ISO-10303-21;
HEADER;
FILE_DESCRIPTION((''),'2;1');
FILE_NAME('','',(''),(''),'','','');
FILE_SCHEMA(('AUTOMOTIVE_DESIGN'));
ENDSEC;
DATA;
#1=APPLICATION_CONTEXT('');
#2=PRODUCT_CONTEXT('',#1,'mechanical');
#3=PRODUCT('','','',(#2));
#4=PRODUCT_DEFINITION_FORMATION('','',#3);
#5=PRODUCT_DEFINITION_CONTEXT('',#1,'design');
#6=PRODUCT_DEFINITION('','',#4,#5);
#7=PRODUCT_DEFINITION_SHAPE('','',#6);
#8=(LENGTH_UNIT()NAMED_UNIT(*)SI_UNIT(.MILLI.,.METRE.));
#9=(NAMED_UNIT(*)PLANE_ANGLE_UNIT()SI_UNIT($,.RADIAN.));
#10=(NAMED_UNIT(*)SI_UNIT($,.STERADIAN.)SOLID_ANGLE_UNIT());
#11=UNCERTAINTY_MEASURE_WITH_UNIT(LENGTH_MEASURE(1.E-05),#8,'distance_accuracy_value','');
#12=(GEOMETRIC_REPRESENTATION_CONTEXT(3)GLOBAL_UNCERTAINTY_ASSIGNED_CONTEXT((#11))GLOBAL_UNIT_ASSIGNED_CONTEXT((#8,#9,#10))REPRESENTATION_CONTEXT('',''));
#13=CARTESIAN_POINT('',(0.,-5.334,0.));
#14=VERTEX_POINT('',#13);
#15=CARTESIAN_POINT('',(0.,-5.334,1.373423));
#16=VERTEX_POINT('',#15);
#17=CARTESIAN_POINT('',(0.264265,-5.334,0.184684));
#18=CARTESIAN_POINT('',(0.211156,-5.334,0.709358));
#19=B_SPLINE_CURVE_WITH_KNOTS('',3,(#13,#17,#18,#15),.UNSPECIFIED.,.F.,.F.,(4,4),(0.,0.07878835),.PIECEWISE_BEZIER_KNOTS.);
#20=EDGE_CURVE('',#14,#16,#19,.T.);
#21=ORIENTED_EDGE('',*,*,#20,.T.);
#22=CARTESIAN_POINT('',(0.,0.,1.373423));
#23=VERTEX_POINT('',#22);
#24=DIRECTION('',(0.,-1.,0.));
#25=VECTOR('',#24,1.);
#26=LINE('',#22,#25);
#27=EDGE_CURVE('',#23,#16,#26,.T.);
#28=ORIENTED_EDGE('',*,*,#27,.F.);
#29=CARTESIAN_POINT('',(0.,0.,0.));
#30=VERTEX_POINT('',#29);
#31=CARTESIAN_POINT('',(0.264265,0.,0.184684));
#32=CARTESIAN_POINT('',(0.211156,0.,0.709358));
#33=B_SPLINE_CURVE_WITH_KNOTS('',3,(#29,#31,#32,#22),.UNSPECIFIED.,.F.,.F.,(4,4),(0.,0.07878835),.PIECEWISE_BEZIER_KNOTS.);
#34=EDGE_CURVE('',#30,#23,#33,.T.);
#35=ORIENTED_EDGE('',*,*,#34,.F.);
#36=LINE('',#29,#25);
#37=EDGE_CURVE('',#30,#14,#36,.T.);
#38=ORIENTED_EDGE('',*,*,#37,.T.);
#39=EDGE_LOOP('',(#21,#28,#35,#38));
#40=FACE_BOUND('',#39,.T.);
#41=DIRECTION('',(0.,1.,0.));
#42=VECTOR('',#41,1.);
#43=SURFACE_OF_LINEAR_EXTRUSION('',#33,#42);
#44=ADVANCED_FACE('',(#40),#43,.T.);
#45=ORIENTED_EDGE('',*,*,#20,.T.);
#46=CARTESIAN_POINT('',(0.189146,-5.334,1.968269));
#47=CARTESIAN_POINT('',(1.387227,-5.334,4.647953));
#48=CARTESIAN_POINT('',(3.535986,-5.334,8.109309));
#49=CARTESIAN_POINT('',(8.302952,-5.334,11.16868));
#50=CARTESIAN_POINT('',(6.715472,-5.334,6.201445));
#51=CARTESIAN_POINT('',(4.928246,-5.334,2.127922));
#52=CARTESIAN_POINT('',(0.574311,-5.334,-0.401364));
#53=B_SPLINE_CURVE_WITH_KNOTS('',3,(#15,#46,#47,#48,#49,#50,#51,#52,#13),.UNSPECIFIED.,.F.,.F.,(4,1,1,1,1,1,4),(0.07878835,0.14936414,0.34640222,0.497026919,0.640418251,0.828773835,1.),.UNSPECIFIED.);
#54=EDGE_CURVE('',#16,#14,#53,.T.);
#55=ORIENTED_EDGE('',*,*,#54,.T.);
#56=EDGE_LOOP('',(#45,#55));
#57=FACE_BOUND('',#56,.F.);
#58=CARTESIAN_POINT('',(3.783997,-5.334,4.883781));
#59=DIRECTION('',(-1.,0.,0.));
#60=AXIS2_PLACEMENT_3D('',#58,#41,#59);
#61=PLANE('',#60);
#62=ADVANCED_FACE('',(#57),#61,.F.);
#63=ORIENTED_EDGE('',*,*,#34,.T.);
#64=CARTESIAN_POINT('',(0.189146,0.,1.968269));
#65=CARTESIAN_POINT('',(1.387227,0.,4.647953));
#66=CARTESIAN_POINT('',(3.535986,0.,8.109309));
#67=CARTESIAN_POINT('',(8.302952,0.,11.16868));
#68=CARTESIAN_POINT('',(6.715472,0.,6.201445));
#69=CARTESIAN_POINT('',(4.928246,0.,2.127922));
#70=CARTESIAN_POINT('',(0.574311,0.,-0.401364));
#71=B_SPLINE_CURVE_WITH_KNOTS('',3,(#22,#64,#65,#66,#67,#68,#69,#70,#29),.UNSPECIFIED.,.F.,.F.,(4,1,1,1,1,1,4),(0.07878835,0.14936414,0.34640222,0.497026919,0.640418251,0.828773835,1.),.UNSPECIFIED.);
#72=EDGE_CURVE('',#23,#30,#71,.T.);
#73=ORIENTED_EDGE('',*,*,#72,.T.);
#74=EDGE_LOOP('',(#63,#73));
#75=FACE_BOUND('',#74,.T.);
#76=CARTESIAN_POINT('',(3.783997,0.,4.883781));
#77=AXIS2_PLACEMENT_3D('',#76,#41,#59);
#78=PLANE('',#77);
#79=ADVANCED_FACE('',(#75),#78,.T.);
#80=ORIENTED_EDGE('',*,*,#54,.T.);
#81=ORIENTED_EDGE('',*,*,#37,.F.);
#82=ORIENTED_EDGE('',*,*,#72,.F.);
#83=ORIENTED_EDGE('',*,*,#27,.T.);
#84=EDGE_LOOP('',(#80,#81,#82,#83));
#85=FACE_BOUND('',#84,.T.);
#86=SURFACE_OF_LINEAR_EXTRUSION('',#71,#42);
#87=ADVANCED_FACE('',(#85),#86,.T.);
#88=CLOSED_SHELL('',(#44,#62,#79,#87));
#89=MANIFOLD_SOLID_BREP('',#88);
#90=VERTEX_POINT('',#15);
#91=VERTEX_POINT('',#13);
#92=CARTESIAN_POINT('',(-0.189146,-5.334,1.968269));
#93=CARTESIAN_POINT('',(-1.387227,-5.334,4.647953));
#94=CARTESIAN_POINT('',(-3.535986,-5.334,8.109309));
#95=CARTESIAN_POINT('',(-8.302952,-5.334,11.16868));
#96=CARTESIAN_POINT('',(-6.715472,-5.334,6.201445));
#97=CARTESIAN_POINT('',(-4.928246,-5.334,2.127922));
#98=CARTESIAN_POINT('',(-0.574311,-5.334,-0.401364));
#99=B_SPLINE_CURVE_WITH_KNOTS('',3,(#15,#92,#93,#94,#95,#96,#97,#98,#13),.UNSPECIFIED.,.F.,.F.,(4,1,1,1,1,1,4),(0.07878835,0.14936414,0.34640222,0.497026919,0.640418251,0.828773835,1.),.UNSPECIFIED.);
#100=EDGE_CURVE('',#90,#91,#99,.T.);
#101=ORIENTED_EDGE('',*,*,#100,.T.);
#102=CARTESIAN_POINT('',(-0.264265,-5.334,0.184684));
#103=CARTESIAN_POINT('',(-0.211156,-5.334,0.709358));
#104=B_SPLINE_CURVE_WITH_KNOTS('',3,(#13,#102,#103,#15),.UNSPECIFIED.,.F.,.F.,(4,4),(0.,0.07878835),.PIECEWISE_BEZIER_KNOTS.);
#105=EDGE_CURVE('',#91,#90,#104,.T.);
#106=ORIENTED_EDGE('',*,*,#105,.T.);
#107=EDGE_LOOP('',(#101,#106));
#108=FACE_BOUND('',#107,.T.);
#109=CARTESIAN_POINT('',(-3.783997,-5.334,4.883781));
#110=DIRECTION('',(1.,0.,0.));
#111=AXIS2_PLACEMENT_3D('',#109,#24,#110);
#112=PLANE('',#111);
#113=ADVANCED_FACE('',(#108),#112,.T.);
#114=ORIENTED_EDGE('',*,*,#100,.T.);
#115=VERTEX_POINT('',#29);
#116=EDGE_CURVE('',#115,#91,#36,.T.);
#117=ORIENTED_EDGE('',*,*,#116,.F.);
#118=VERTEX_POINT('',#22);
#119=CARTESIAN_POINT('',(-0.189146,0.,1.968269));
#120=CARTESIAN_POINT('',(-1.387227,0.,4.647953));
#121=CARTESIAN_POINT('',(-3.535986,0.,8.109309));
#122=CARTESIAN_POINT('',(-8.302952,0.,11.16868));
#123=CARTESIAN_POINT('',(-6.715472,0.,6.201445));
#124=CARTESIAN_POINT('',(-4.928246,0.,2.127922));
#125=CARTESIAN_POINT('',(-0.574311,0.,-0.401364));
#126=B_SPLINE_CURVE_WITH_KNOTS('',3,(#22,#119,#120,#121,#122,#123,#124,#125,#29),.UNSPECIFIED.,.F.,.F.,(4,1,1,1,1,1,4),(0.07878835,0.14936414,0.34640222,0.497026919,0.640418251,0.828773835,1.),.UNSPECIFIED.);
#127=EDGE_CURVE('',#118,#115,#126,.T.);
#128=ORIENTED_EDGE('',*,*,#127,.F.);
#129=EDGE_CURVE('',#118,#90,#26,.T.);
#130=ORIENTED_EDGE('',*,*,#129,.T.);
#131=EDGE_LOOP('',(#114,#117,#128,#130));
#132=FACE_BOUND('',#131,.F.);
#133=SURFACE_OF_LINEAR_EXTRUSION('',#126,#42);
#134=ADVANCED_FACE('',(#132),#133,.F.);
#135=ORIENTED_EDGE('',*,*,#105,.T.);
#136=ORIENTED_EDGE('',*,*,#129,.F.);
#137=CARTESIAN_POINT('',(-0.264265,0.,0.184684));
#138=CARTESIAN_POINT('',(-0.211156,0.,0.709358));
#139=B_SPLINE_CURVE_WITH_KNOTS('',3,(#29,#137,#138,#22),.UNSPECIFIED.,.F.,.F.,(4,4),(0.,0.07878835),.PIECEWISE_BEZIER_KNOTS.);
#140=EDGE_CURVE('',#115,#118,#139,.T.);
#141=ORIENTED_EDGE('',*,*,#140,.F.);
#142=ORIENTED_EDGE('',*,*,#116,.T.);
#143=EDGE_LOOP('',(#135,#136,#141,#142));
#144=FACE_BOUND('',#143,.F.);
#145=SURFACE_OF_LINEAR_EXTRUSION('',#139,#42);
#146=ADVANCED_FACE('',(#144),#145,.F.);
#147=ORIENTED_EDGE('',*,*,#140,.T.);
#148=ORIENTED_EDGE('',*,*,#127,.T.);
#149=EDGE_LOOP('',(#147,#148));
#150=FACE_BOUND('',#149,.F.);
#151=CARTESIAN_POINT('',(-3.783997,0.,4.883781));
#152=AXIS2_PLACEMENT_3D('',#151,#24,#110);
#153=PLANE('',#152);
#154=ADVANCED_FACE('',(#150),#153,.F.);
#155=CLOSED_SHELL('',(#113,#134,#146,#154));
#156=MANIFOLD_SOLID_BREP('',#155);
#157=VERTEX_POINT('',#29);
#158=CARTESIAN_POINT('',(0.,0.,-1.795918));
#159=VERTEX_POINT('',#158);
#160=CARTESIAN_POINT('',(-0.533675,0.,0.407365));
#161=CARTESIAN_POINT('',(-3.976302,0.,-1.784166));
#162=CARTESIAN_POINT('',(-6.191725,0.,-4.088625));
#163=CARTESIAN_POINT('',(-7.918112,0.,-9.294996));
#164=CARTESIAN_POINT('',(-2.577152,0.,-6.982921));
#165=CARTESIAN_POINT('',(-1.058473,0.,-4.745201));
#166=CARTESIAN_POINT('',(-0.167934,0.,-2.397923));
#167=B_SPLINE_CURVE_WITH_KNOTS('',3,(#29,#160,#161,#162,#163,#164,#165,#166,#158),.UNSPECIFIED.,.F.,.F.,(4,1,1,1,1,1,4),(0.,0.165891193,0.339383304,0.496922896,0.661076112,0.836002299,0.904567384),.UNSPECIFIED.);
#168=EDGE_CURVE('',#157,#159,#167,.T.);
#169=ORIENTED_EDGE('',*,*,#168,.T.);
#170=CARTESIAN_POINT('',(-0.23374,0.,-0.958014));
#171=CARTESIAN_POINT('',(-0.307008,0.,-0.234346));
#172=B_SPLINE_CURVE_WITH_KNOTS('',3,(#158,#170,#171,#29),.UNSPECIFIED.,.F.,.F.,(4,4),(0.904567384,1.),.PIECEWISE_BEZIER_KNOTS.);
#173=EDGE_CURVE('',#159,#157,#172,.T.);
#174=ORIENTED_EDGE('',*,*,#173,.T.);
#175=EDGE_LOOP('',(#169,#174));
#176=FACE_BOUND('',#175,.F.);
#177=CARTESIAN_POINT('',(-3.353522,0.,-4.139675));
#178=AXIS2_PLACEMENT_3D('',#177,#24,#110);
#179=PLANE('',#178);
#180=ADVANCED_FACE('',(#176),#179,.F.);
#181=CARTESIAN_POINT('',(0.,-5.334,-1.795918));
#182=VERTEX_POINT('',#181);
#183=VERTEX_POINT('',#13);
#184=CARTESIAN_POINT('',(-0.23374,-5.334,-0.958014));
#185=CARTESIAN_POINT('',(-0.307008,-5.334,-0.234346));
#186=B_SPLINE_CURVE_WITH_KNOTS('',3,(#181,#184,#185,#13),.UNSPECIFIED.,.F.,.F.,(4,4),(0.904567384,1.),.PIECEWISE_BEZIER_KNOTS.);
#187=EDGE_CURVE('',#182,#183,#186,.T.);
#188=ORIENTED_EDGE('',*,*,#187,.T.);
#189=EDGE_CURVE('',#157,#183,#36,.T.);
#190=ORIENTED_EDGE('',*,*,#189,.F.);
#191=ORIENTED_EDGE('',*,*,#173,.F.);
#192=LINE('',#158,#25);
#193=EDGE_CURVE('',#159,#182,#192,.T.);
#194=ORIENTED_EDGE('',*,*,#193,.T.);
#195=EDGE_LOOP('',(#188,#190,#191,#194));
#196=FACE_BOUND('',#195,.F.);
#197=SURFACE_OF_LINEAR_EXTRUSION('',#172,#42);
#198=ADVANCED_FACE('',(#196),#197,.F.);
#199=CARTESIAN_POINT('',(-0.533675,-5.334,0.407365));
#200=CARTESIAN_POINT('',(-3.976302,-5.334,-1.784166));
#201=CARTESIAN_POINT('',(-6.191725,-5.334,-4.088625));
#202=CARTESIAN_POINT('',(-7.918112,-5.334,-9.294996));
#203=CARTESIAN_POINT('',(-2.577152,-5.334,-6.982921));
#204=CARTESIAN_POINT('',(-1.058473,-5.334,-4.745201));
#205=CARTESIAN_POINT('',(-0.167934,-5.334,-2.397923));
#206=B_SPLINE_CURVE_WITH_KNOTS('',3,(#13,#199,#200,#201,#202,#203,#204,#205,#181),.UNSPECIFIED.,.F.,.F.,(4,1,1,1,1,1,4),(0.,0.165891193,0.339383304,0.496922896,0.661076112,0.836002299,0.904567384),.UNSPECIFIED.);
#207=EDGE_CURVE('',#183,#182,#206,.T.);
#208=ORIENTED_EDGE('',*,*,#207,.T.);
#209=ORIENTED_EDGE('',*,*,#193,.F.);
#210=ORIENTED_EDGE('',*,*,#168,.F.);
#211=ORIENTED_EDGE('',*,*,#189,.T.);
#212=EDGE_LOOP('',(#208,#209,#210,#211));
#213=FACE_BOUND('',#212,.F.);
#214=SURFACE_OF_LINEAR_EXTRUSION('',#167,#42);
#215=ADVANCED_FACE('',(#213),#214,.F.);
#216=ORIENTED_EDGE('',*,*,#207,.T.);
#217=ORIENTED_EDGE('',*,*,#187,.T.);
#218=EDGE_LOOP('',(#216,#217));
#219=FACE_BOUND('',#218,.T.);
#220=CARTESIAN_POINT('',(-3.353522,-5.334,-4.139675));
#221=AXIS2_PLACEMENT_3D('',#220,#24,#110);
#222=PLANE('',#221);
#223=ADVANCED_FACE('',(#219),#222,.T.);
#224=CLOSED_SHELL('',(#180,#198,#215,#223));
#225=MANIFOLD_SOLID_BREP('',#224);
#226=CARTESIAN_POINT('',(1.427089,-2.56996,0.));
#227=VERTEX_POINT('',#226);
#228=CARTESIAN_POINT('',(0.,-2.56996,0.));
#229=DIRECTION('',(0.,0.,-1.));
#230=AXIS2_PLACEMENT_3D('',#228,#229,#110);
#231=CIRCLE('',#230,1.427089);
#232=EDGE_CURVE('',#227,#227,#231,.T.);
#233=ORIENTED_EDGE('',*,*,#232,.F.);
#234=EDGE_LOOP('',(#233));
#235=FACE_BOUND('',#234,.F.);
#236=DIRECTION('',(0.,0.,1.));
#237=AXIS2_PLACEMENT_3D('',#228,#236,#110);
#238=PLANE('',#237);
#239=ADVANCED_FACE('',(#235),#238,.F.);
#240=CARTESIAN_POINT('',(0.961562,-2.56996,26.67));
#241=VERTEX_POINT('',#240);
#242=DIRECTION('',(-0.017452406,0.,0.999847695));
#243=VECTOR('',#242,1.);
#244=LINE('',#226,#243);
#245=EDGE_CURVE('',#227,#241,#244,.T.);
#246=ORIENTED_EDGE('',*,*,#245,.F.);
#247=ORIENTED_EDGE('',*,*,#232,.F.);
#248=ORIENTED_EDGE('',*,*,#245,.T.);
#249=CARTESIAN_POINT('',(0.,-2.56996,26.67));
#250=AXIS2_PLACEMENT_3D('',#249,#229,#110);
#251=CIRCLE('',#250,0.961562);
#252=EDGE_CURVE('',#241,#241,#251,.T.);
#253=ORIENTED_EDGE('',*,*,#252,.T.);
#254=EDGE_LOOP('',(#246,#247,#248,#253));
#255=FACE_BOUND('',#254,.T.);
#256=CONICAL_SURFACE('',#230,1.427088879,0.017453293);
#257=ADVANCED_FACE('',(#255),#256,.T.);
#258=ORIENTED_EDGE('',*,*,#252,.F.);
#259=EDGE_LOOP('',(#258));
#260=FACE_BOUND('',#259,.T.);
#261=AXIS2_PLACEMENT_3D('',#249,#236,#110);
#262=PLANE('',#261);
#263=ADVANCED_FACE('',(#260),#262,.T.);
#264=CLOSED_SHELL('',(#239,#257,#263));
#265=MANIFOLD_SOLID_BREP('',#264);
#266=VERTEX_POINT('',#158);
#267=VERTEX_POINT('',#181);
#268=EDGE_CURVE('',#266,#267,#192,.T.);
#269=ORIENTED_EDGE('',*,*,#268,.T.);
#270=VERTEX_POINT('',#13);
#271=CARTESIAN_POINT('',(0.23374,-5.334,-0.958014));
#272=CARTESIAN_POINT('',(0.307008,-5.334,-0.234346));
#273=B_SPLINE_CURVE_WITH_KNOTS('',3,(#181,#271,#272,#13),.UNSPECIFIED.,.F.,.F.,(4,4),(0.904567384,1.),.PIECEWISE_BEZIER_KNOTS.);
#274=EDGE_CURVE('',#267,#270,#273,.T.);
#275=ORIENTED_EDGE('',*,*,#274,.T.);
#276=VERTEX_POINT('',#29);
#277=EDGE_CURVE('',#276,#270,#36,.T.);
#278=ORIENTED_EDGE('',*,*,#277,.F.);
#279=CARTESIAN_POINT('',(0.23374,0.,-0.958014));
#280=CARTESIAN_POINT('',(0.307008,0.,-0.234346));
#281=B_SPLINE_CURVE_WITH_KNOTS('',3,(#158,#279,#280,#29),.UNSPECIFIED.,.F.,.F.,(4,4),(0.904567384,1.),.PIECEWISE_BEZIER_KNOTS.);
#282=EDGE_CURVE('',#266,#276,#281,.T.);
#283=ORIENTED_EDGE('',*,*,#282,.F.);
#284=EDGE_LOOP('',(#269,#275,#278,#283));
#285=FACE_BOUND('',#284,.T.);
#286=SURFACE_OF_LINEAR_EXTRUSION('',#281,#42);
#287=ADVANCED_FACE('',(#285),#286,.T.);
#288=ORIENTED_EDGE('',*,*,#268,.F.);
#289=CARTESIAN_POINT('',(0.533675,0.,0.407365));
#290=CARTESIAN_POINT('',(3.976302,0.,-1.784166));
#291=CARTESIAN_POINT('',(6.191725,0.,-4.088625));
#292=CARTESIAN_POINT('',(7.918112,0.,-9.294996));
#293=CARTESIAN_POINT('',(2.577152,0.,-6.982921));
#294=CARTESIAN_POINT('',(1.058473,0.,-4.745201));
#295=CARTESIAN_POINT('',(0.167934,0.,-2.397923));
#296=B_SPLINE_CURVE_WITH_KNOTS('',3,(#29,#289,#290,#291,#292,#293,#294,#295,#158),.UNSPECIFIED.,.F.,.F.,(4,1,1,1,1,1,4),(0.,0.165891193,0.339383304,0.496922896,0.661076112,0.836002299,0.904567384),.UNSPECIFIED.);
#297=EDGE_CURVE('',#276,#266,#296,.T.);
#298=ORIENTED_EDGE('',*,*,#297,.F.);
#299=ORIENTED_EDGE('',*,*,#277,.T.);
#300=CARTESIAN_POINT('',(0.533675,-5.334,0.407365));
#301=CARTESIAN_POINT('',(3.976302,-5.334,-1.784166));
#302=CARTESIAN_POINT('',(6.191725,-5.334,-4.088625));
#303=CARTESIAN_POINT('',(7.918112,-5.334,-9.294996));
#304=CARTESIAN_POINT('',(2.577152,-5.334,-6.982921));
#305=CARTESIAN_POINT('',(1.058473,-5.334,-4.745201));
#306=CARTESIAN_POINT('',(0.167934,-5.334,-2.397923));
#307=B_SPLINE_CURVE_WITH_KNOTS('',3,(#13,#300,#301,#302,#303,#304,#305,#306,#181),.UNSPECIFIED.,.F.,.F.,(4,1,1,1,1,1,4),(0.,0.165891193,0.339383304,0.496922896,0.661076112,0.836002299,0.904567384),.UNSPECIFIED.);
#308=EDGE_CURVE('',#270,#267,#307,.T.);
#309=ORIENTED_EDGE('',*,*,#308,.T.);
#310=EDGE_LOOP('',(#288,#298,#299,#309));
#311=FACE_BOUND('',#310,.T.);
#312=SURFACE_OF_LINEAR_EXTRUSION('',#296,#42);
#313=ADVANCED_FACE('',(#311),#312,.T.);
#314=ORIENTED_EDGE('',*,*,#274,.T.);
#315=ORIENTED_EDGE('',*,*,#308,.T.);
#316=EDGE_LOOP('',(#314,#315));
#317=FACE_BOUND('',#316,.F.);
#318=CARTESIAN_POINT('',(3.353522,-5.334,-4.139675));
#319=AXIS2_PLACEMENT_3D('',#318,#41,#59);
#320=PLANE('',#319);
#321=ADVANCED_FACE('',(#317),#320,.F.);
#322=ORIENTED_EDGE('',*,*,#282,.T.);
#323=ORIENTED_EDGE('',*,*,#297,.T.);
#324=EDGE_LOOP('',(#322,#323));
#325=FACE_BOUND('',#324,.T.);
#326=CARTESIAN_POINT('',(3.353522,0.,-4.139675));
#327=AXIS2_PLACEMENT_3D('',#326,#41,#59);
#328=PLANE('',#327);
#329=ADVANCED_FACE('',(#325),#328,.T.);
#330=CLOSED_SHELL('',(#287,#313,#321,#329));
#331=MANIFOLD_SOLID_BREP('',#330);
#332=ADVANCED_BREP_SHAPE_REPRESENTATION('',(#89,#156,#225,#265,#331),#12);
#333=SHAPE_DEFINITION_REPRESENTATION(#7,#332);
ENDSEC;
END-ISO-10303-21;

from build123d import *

# Parameters (mm, degrees)
F2_DEPTH = 5.334
F3_R     = 1.427088879
F4_DEPTH = 26.67
F4_TAPER = 1


with BuildPart() as f2:
    # F0 (on Front) → F2 (new body)
    with BuildSketch(Plane.XZ):
        with BuildLine():
            add(Edge.make_bspline(
                [(0, 1.3734232062), (-0.1891456517, 1.9682690903), (-1.3872274811, 4.6479528258), (-3.5359864877, 8.1093093668), (-8.3029516428, 11.1686804607), (-6.7154718992, 6.2014445679), (-4.9282457235, 2.1279215131), (-0.5743113943, -0.4013639182), (0, 0)],
                knots=[0.0787883503, 0.0787883503, 0.0787883503, 0.0787883503, 0.1493641404, 0.34640222, 0.4970269185, 0.6404182512, 0.8287738354, 1, 1, 1, 1], degree=3))
            add(Edge.make_bspline(
                [(0, 0), (-0.2642647953, 0.1846843972), (-0.2111556083, 0.7093580091), (0, 1.3734232062)],
                knots=[0, 0, 0, 0, 0.0787883503, 0.0787883503, 0.0787883503, 0.0787883503], degree=3))
        make_face()
    extrude(amount=F2_DEPTH)


with BuildPart() as f2b:
    # F0 (on Front) → F2, piece 2 (new body)
    with BuildSketch(Plane.XZ):
        with BuildLine():
            add(Edge.make_bspline(
                [(0, 0), (0.2642647953, 0.1846843972), (0.2111556083, 0.7093580091), (0, 1.3734232062)],
                knots=[0, 0, 0, 0, 0.0787883503, 0.0787883503, 0.0787883503, 0.0787883503], degree=3))
            add(Edge.make_bspline(
                [(0, 1.3734232062), (0.1891456517, 1.9682690903), (1.3872274811, 4.6479528258), (3.5359864877, 8.1093093668), (8.3029516428, 11.1686804607), (6.7154718992, 6.2014445679), (4.9282457235, 2.1279215131), (0.5743113943, -0.4013639182), (0, 0)],
                knots=[0.0787883503, 0.0787883503, 0.0787883503, 0.0787883503, 0.1493641404, 0.34640222, 0.4970269185, 0.6404182512, 0.8287738354, 1, 1, 1, 1], degree=3))
        make_face()
    extrude(amount=F2_DEPTH)


with BuildPart() as f2c:
    # F1 (on Front) → F2, piece 3 (new body)
    with BuildSketch(Plane.XZ):
        with BuildLine():
            add(Edge.make_bspline(
                [(0, -1.7959175247), (-0.2337398032, -0.9580135272), (-0.3070084548, -0.234345833), (0, 0)],
                knots=[0.9045673843, 0.9045673843, 0.9045673843, 0.9045673843, 1, 1, 1, 1], degree=3))
            add(Edge.make_bspline(
                [(0, 0), (-0.5336749747, 0.4073650237), (-3.976302372, -1.7841660826), (-6.1917247461, -4.0886252186), (-7.9181121338, -9.2949958308), (-2.5771520257, -6.9829206625), (-1.0584729835, -4.7452005162), (-0.1679340915, -2.3979230226), (0, -1.7959175247)],
                knots=[0, 0, 0, 0, 0.1658911929, 0.3393833044, 0.4969228956, 0.6610761119, 0.8360022986, 0.9045673843, 0.9045673843, 0.9045673843, 0.9045673843], degree=3))
        make_face()
    extrude(amount=F2_DEPTH)


with BuildPart() as f2d:
    # F1 (on Front) → F2, piece 4 (new body)
    with BuildSketch(Plane.XZ):
        with BuildLine():
            add(Edge.make_bspline(
                [(0, 0), (0.5336749747, 0.4073650237), (3.976302372, -1.7841660826), (6.1917247461, -4.0886252186), (7.9181121338, -9.2949958308), (2.5771520257, -6.9829206625), (1.0584729835, -4.7452005162), (0.1679340915, -2.3979230226), (0, -1.7959175247)],
                knots=[0, 0, 0, 0, 0.1658911929, 0.3393833044, 0.4969228956, 0.6610761119, 0.8360022986, 0.9045673843, 0.9045673843, 0.9045673843, 0.9045673843], degree=3))
            add(Edge.make_bspline(
                [(0, -1.7959175247), (0.2337398032, -0.9580135272), (0.3070084548, -0.234345833), (0, 0)],
                knots=[0.9045673843, 0.9045673843, 0.9045673843, 0.9045673843, 1, 1, 1, 1], degree=3))
        make_face()
    extrude(amount=F2_DEPTH)


with BuildPart() as f4:
    # F3 (on Top) → F4 (new body)
    with BuildSketch(Plane.XY):
        with Locations((0, -2.5699601974)):
            Circle(F3_R)
    extrude(amount=F4_DEPTH, taper=F4_TAPER)


solid = Compound([f2.part, f2b.part, f2c.part, f2d.part, f4.part])
